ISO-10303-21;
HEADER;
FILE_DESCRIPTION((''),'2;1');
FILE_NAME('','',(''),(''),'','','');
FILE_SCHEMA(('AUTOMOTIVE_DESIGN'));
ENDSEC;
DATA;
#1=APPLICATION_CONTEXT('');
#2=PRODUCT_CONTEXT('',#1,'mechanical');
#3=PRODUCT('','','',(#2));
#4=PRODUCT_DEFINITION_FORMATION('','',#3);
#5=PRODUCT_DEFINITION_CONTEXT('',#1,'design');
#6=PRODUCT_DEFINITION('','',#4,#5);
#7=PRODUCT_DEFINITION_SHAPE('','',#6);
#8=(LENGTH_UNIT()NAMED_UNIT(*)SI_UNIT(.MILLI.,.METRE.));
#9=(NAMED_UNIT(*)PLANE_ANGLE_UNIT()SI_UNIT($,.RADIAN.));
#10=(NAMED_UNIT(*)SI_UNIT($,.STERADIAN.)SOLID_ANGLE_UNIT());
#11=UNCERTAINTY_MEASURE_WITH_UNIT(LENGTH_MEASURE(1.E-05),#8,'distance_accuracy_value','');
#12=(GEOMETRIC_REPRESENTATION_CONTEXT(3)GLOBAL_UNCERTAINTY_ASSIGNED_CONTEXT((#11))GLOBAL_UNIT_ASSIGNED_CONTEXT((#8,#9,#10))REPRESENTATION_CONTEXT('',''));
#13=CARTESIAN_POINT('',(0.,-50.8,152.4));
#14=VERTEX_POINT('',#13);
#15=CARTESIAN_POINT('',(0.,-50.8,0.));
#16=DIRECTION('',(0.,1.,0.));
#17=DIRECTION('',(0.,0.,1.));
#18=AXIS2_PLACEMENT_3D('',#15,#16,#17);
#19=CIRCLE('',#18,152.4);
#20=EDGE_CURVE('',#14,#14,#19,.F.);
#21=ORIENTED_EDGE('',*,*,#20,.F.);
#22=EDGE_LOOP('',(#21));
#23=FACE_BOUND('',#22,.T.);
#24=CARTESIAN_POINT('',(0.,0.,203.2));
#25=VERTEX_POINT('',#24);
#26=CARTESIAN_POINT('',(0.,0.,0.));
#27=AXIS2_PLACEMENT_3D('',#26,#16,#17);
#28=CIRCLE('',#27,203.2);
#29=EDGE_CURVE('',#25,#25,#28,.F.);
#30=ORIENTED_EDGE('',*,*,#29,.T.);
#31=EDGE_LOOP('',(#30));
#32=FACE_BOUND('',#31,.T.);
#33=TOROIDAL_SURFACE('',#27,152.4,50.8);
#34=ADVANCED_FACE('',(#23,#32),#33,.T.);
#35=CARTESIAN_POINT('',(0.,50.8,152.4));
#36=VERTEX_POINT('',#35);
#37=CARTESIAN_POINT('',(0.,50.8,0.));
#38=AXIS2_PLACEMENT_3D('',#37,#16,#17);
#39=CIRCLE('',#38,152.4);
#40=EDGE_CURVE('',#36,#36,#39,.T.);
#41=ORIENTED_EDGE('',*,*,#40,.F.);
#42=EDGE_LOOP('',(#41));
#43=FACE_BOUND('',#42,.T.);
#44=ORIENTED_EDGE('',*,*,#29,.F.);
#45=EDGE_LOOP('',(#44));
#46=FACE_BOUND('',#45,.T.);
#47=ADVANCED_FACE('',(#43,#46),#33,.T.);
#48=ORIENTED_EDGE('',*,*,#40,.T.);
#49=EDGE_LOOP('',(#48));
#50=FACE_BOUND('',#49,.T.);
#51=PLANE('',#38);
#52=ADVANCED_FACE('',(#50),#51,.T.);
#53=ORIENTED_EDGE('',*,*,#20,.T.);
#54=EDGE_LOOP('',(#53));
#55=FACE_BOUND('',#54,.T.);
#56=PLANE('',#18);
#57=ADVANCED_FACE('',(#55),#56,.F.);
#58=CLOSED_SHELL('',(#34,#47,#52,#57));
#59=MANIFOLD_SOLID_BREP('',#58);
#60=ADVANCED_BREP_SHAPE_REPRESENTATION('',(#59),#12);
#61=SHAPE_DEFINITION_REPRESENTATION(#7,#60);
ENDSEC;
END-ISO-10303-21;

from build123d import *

# Parameters (mm, degrees)
BOSS_EXTRUDE1_DEPTH      = 50.8
BOSS_EXTRUDE1_DEPTH_BACK = 50.8
SKETCH1_R                = 203.2
FILLET1_R                = 50.8


with BuildPart() as part:
    # Sketch1 → Boss-Extrude1 (new, two sides: drawn at the far end of the back side and taken through both)
    with BuildSketch(Plane(origin=(0, 0, 0), x_dir=(1, 0, 0), z_dir=(0, 1, 0)).offset(-BOSS_EXTRUDE1_DEPTH_BACK)):
        with Locations(Location((0, 0, 0), (0, 0, 270))):
            Circle(SKETCH1_R)
    extrude(amount=BOSS_EXTRUDE1_DEPTH + BOSS_EXTRUDE1_DEPTH_BACK)

    # Fillet1
    fillet1_edges = [part.edges().sort_by_distance(p)[0] for p in [
        (0, 50.8, -203.2),
        (0, -50.8, -203.2),
    ]]
    fillet(fillet1_edges, radius=FILLET1_R - 0.0001)  # a hair under: the kernel refuses the full size


solid = part.part
